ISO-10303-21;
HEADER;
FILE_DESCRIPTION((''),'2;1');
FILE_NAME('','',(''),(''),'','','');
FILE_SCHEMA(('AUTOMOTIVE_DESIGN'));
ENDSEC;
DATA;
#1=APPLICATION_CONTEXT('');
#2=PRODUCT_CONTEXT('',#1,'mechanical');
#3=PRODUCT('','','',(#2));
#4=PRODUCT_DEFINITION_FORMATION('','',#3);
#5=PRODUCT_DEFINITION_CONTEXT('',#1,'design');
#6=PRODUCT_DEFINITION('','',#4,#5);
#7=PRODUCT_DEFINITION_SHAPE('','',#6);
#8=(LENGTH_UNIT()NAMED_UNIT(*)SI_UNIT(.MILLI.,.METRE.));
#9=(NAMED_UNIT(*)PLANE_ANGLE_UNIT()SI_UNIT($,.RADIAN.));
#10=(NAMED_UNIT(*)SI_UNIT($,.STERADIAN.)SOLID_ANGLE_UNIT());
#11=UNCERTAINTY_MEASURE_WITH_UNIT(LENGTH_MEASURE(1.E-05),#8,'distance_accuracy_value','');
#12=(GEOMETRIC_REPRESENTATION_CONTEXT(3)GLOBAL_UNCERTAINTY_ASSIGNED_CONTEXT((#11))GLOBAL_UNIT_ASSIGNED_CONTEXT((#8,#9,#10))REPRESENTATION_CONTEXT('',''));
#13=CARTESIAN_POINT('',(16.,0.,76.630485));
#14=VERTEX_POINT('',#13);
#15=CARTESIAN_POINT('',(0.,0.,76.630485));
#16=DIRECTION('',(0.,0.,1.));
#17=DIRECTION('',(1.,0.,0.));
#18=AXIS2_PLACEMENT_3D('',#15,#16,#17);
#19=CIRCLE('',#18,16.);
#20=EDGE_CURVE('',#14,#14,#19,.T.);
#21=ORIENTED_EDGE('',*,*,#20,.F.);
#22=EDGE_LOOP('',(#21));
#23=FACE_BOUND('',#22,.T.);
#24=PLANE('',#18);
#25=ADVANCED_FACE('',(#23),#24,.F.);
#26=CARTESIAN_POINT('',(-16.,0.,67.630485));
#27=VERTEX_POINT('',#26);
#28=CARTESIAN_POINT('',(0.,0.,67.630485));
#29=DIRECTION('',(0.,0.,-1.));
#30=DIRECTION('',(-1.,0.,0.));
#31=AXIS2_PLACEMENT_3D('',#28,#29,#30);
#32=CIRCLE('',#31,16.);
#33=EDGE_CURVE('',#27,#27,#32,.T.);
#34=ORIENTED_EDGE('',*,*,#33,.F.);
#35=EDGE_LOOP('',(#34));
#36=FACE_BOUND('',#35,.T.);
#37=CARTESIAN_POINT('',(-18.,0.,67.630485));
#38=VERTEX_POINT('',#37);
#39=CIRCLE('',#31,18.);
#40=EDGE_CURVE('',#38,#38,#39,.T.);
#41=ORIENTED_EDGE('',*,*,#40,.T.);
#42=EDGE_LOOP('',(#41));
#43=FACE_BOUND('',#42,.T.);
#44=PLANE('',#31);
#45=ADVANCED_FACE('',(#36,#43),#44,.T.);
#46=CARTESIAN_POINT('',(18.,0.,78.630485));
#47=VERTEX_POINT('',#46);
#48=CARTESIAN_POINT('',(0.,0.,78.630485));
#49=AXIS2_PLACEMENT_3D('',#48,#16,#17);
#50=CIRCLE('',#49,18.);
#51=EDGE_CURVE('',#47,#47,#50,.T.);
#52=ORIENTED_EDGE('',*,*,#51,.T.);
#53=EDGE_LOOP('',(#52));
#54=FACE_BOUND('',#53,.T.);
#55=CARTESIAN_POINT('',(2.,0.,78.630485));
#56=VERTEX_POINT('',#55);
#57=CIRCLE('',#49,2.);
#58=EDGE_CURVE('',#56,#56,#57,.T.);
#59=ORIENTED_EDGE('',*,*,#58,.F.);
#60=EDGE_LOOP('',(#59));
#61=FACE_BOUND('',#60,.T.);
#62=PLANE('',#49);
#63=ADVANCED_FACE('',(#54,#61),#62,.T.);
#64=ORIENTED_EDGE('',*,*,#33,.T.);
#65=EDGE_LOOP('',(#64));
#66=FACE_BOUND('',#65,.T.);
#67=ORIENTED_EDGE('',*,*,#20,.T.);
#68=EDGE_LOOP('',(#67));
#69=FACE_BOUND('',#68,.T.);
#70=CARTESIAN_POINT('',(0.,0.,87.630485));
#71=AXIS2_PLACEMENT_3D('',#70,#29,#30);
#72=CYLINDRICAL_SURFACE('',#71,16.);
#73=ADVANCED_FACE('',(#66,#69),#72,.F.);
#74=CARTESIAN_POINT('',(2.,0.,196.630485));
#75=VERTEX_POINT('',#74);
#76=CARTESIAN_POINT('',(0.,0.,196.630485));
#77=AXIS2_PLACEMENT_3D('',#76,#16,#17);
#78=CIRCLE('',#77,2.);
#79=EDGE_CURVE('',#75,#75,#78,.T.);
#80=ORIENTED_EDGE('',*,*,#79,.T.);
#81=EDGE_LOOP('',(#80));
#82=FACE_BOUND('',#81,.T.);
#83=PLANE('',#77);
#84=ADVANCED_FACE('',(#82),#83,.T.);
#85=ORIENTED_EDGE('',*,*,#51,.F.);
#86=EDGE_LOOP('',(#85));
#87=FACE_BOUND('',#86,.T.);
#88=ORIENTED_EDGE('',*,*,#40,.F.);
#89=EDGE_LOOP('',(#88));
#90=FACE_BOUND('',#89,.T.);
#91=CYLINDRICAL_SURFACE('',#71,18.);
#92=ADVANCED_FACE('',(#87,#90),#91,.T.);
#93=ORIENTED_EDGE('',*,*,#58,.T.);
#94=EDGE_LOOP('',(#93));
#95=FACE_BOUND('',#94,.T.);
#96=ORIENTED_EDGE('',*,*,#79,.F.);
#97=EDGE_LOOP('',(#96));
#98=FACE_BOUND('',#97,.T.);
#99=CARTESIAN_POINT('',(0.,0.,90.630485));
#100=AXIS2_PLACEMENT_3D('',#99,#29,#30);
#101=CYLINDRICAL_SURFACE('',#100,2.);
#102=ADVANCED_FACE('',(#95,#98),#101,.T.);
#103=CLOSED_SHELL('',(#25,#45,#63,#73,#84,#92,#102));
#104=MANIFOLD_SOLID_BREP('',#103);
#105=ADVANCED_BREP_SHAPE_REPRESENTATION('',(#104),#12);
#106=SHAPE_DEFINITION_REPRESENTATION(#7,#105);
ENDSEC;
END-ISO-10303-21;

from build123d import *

# Parameters (mm, degrees)
SKETCH1_R                = 88
BOSS_EXTRUDE3_DEPTH      = 25
SKETCH4_W                = 10.4719
SKETCH4_H                = 13.351164338
BOSS_EXTRUDE4_DEPTH      = 25
FILLET2_R                = 4
CIRPATTERN1_COUNT        = 30
FILLET2_OF_CIRPATTERN1_R = 4
SKETCH6_R                = 10
BOSS_EXTRUDE5_DEPTH      = 60
BOSS_EXTRUDE6_START      = 10
SKETCH7_R                = 10
BOSS_EXTRUDE6_DEPTH      = 10
SKETCH8_R                = 10
BOSS_EXTRUDE7_DEPTH      = 10
SKETCH9_R                = 10
BOSS_EXTRUDE8_DEPTH      = 25
SKETCH10_R               = 10
BOSS_EXTRUDE9_DEPTH      = 42.5
SKETCH12_R               = 12.5
CUT_EXTRUDE1_DEPTH       = 12
CUT_EXTRUDE2_START       = -55.5
SKETCH13_R               = 10
CUT_EXTRUDE2_DEPTH       = 55.5
SKETCH14_R               = 10
BOSS_EXTRUDE10_DEPTH     = 440
SKETCH15_R               = 105
BOSS_EXTRUDE12_DEPTH     = 25
BOSS_EXTRUDE13_START     = 30
SKETCH16_R               = 105
BOSS_EXTRUDE13_DEPTH     = 30
SKETCH17_R               = 10
BOSS_EXTRUDE14_DEPTH     = 50
SKETCH18_R               = 10
BOSS_EXTRUDE15_DEPTH     = 30
SKETCH19_R               = 105
SKETCH19_R_2             = 90
CUT_EXTRUDE3_DEPTH       = 100
SHELL3_START             = -30
SHELL3_OUTLINE_R         = 80
SHELL3_DEPTH             = 45
SCALE2_SCALE             = 0.2


# Read off the part's stored shape, not the designer's step: Shell3
with BuildPart() as part:
    # Sketch1 → Boss-Extrude3 (new body)
    with BuildSketch(Plane.XY):
        Circle(SKETCH1_R)
    extrude(amount=BOSS_EXTRUDE3_DEPTH)

    # Sketch4 → Boss-Extrude4 (add)
    with BuildSketch(Plane.XY.offset(25)):
        with Locations((0, 93.324417831)):
            Rectangle(SKETCH4_W, SKETCH4_H)
    boss_extrude4 = extrude(amount=-BOSS_EXTRUDE4_DEPTH)

    # Fillet2
    fillet2_edges = [part.edges().sort_by_distance(p)[0] for p in [
        (5.23595, 100, 12.5),
        (0, 100, 0),
        (-5.23595, 100, 12.5),
        (0, 100, 25),
    ]]
    fillet(fillet2_edges, radius=FILLET2_R)

    # CirPattern1: Boss-Extrude4 ×30 about axis
    cirpattern1_axis = Axis((0, 0.317667884, 0), (0, 0, 1))
    for i in range(1, CIRPATTERN1_COUNT):
        add(boss_extrude4.rotate(cirpattern1_axis, i * 360 / CIRPATTERN1_COUNT))

    # Fillet2 of CirPattern1
    fillet2_of_cirpattern1_edges = [part.edges().sort_by_distance(p)[0] for p in [
        (-15.603590285, 98.910317096, 12.5),
        (-20.725122215, 97.821701879, 0),
        (-25.846654145, 96.733086661, 12.5),
        (-20.725122215, 97.821701879, 25),
        (-35.7611788, 93.511662322, 12.5),
        (-40.544457139, 91.382009596, 0),
        (-45.327735478, 89.252356869, 12.5),
        (-40.544457139, 91.382009596, 25),
        (-54.3558322, 84.039982796, 12.5),
        (-58.591804732, 80.962368605, 0),
        (-62.827777264, 77.884754413, 12.5),
        (-58.591804732, 80.962368605, 25),
        (-70.574874905, 70.909236365, 12.5),
        (-74.078409304, 67.018167216, 0),
        (-77.581943702, 63.127098067, 12.5),
        (-74.078409304, 67.018167216, 25),
        (-83.709456921, 54.693299655, 12.5),
        (-86.327431921, 50.158833942, 0),
        (-88.945406921, 45.624368229, 12.5),
        (-86.327431921, 50.158833942, 25),
        (-93.185533987, 36.100886913, 12.5),
        (-94.803531519, 31.121202547, 0),
        (-96.42152905, 26.14151818, 12.5),
        (-94.803531519, 31.121202547, 25),
        (-98.588956064, 15.944575793, 12.5),
        (-99.136261871, 10.737308875, 0),
        (-99.683567678, 5.530041957, 12.5),
        (-99.136261871, 10.737308875, 25),
        (-99.683567678, -4.894706189, 12.5),
        (-99.136261871, -10.101973107, 0),
        (-98.588956064, -15.309240025, 12.5),
        (-99.136261871, -10.101973107, 25),
        (-96.42152905, -25.506182413, 12.5),
        (-94.803531519, -30.485866779, 0),
        (-93.185533987, -35.465551145, 12.5),
        (-94.803531519, -30.485866779, 25),
        (-88.945406921, -44.989032461, 12.5),
        (-86.327431921, -49.523498174, 0),
        (-83.709456921, -54.057963887, 12.5),
        (-86.327431921, -49.523498174, 25),
        (-77.581943702, -62.491762299, 12.5),
        (-74.078409304, -66.382831448, 0),
        (-70.574874905, -70.273900597, 12.5),
        (-74.078409304, -66.382831448, 25),
        (-62.827777264, -77.249418645, 12.5),
        (-58.591804732, -80.327032837, 0),
        (-54.3558322, -83.404647029, 12.5),
        (-58.591804732, -80.327032837, 25),
        (-45.327735478, -88.617021102, 12.5),
        (-40.544457139, -90.746673828, 0),
        (-35.7611788, -92.876326554, 12.5),
        (-40.544457139, -90.746673828, 25),
        (-25.846654145, -96.097750894, 12.5),
        (-20.725122215, -97.186366111, 0),
        (-15.603590285, -98.274981329, 12.5),
        (-20.725122215, -97.186366111, 25),
        (-5.23595, -99.364664232, 12.5),
        (0, -99.364664232, 0),
        (5.23595, -99.364664232, 12.5),
        (0, -99.364664232, 25),
        (15.603590285, -98.274981329, 12.5),
        (20.725122215, -97.186366111, 0),
        (25.846654145, -96.097750894, 12.5),
        (20.725122215, -97.186366111, 25),
        (35.7611788, -92.876326554, 12.5),
        (40.544457139, -90.746673828, 0),
        (45.327735478, -88.617021102, 12.5),
        (40.544457139, -90.746673828, 25),
        (54.3558322, -83.404647029, 12.5),
        (58.591804732, -80.327032837, 0),
        (62.827777264, -77.249418645, 12.5),
        (58.591804732, -80.327032837, 25),
        (70.574874905, -70.273900597, 12.5),
        (74.078409304, -66.382831448, 0),
        (77.581943702, -62.491762299, 12.5),
        (74.078409304, -66.382831448, 25),
        (83.709456921, -54.057963887, 12.5),
        (86.327431921, -49.523498174, 0),
        (88.945406921, -44.989032461, 12.5),
        (86.327431921, -49.523498174, 25),
        (93.185533987, -35.465551145, 12.5),
        (94.803531519, -30.485866779, 0),
        (96.42152905, -25.506182413, 12.5),
        (94.803531519, -30.485866779, 25),
        (98.588956064, -15.309240025, 12.5),
        (99.136261871, -10.101973107, 0),
        (99.683567678, -4.894706189, 12.5),
        (99.136261871, -10.101973107, 25),
        (99.683567678, 5.530041957, 12.5),
        (99.136261871, 10.737308875, 0),
        (98.588956064, 15.944575793, 12.5),
        (99.136261871, 10.737308875, 25),
        (96.42152905, 26.14151818, 12.5),
        (94.803531519, 31.121202547, 0),
        (93.185533987, 36.100886913, 12.5),
        (94.803531519, 31.121202547, 25),
        (88.945406921, 45.624368229, 12.5),
        (86.327431921, 50.158833942, 0),
        (83.709456921, 54.693299655, 12.5),
        (86.327431921, 50.158833942, 25),
        (77.581943702, 63.127098067, 12.5),
        (74.078409304, 67.018167216, 0),
        (70.574874905, 70.909236365, 12.5),
        (74.078409304, 67.018167216, 25),
        (62.827777264, 77.884754413, 12.5),
        (58.591804732, 80.962368605, 0),
        (54.3558322, 84.039982796, 12.5),
        (58.591804732, 80.962368605, 25),
        (45.327735478, 89.252356869, 12.5),
        (40.544457139, 91.382009596, 0),
        (35.7611788, 93.511662322, 12.5),
        (40.544457139, 91.382009596, 25),
        (25.846654145, 96.733086661, 12.5),
        (20.725122215, 97.821701879, 0),
        (15.603590285, 98.910317096, 12.5),
        (20.725122215, 97.821701879, 25),
    ]]
    fillet(fillet2_of_cirpattern1_edges, radius=FILLET2_OF_CIRPATTERN1_R)

    # Sketch6 → Boss-Extrude5 (add)
    with BuildSketch(Plane.XY.offset(25)):
        Circle(SKETCH6_R)
    extrude(amount=BOSS_EXTRUDE5_DEPTH)

    # Sketch7 → Boss-Extrude6 (add)
    with BuildSketch(Plane(origin=(0, 0, 0), x_dir=(-1, 0, 0), z_dir=(0, 0, -1)).offset(BOSS_EXTRUDE6_START)):
        with Locations(Location((0, 0, 0), (0, 0, 180))):
            Circle(SKETCH7_R)
    extrude(amount=-BOSS_EXTRUDE6_DEPTH)

    # Sketch8 → Boss-Extrude7 (add)
    with BuildSketch(Plane.XY.offset(85)):
        Circle(SKETCH8_R)
    extrude(amount=BOSS_EXTRUDE7_DEPTH)

    # Sketch9 → Boss-Extrude8 (add)
    with BuildSketch(Plane.XY.offset(95)):
        Circle(SKETCH9_R)
    extrude(amount=BOSS_EXTRUDE8_DEPTH)

    # Sketch10 → Boss-Extrude9 (add)
    with BuildSketch(Plane.XY.offset(120)):
        Circle(SKETCH10_R)
    extrude(amount=BOSS_EXTRUDE9_DEPTH)

    # Sketch12 → Cut-Extrude1 (cut)
    with BuildSketch(Plane.XY.offset(162.5)):
        Circle(SKETCH12_R)
    extrude(amount=-CUT_EXTRUDE1_DEPTH, mode=Mode.SUBTRACT)

    # Sketch13 → Cut-Extrude2 (cut)
    with BuildSketch(Plane.XY.offset(150.5).offset(CUT_EXTRUDE2_START)):
        Circle(SKETCH13_R)
    extrude(amount=CUT_EXTRUDE2_DEPTH, mode=Mode.SUBTRACT)

    # Sketch14 → Boss-Extrude10 (add)
    with BuildSketch(Plane.XY.offset(95)):
        Circle(SKETCH14_R)
    extrude(amount=BOSS_EXTRUDE10_DEPTH)

    # Sketch15 → Boss-Extrude12 (add)
    with BuildSketch(Plane(origin=(0, 0, 0), x_dir=(-1, 0, 0), z_dir=(0, 0, -1))):
        Circle(SKETCH15_R)
    extrude(amount=-BOSS_EXTRUDE12_DEPTH)

    # Sketch16 → Boss-Extrude13 (add)
    with BuildSketch(Plane(origin=(0, 0, 0), x_dir=(-1, 0, 0), z_dir=(0, 0, -1)).offset(BOSS_EXTRUDE13_START)):
        Circle(SKETCH16_R)
    extrude(amount=-BOSS_EXTRUDE13_DEPTH)

    # Sketch17 → Boss-Extrude14 (add)
    with BuildSketch(Plane.XY.offset(535)):
        Circle(SKETCH17_R)
    extrude(amount=BOSS_EXTRUDE14_DEPTH)

    # Sketch18 → Boss-Extrude15 (add)
    with BuildSketch(Plane.XY.offset(585)):
        Circle(SKETCH18_R)
    extrude(amount=BOSS_EXTRUDE15_DEPTH)

    # Sketch19 → Cut-Extrude3 (cut)
    with BuildSketch(Plane(origin=(0, 0, -30), x_dir=(-1, 0, 0), z_dir=(0, 0, -1))):
        Circle(SKETCH19_R)
        Circle(SKETCH19_R_2, mode=Mode.SUBTRACT)
    extrude(amount=-CUT_EXTRUDE3_DEPTH, mode=Mode.SUBTRACT)

    # Shell3 outline → Shell3 (cut)
    with BuildSketch(Plane.XY.offset(SHELL3_START)):
        Circle(SHELL3_OUTLINE_R)
    extrude(amount=SHELL3_DEPTH, mode=Mode.SUBTRACT)


with BuildPart() as part_1:
    # Scale2: scaled about (0, 0, 92.038106236)
    add(part.part.scale(SCALE2_SCALE).moved(Location((0, 0, 73.630484989))))


solid = part_1.part
